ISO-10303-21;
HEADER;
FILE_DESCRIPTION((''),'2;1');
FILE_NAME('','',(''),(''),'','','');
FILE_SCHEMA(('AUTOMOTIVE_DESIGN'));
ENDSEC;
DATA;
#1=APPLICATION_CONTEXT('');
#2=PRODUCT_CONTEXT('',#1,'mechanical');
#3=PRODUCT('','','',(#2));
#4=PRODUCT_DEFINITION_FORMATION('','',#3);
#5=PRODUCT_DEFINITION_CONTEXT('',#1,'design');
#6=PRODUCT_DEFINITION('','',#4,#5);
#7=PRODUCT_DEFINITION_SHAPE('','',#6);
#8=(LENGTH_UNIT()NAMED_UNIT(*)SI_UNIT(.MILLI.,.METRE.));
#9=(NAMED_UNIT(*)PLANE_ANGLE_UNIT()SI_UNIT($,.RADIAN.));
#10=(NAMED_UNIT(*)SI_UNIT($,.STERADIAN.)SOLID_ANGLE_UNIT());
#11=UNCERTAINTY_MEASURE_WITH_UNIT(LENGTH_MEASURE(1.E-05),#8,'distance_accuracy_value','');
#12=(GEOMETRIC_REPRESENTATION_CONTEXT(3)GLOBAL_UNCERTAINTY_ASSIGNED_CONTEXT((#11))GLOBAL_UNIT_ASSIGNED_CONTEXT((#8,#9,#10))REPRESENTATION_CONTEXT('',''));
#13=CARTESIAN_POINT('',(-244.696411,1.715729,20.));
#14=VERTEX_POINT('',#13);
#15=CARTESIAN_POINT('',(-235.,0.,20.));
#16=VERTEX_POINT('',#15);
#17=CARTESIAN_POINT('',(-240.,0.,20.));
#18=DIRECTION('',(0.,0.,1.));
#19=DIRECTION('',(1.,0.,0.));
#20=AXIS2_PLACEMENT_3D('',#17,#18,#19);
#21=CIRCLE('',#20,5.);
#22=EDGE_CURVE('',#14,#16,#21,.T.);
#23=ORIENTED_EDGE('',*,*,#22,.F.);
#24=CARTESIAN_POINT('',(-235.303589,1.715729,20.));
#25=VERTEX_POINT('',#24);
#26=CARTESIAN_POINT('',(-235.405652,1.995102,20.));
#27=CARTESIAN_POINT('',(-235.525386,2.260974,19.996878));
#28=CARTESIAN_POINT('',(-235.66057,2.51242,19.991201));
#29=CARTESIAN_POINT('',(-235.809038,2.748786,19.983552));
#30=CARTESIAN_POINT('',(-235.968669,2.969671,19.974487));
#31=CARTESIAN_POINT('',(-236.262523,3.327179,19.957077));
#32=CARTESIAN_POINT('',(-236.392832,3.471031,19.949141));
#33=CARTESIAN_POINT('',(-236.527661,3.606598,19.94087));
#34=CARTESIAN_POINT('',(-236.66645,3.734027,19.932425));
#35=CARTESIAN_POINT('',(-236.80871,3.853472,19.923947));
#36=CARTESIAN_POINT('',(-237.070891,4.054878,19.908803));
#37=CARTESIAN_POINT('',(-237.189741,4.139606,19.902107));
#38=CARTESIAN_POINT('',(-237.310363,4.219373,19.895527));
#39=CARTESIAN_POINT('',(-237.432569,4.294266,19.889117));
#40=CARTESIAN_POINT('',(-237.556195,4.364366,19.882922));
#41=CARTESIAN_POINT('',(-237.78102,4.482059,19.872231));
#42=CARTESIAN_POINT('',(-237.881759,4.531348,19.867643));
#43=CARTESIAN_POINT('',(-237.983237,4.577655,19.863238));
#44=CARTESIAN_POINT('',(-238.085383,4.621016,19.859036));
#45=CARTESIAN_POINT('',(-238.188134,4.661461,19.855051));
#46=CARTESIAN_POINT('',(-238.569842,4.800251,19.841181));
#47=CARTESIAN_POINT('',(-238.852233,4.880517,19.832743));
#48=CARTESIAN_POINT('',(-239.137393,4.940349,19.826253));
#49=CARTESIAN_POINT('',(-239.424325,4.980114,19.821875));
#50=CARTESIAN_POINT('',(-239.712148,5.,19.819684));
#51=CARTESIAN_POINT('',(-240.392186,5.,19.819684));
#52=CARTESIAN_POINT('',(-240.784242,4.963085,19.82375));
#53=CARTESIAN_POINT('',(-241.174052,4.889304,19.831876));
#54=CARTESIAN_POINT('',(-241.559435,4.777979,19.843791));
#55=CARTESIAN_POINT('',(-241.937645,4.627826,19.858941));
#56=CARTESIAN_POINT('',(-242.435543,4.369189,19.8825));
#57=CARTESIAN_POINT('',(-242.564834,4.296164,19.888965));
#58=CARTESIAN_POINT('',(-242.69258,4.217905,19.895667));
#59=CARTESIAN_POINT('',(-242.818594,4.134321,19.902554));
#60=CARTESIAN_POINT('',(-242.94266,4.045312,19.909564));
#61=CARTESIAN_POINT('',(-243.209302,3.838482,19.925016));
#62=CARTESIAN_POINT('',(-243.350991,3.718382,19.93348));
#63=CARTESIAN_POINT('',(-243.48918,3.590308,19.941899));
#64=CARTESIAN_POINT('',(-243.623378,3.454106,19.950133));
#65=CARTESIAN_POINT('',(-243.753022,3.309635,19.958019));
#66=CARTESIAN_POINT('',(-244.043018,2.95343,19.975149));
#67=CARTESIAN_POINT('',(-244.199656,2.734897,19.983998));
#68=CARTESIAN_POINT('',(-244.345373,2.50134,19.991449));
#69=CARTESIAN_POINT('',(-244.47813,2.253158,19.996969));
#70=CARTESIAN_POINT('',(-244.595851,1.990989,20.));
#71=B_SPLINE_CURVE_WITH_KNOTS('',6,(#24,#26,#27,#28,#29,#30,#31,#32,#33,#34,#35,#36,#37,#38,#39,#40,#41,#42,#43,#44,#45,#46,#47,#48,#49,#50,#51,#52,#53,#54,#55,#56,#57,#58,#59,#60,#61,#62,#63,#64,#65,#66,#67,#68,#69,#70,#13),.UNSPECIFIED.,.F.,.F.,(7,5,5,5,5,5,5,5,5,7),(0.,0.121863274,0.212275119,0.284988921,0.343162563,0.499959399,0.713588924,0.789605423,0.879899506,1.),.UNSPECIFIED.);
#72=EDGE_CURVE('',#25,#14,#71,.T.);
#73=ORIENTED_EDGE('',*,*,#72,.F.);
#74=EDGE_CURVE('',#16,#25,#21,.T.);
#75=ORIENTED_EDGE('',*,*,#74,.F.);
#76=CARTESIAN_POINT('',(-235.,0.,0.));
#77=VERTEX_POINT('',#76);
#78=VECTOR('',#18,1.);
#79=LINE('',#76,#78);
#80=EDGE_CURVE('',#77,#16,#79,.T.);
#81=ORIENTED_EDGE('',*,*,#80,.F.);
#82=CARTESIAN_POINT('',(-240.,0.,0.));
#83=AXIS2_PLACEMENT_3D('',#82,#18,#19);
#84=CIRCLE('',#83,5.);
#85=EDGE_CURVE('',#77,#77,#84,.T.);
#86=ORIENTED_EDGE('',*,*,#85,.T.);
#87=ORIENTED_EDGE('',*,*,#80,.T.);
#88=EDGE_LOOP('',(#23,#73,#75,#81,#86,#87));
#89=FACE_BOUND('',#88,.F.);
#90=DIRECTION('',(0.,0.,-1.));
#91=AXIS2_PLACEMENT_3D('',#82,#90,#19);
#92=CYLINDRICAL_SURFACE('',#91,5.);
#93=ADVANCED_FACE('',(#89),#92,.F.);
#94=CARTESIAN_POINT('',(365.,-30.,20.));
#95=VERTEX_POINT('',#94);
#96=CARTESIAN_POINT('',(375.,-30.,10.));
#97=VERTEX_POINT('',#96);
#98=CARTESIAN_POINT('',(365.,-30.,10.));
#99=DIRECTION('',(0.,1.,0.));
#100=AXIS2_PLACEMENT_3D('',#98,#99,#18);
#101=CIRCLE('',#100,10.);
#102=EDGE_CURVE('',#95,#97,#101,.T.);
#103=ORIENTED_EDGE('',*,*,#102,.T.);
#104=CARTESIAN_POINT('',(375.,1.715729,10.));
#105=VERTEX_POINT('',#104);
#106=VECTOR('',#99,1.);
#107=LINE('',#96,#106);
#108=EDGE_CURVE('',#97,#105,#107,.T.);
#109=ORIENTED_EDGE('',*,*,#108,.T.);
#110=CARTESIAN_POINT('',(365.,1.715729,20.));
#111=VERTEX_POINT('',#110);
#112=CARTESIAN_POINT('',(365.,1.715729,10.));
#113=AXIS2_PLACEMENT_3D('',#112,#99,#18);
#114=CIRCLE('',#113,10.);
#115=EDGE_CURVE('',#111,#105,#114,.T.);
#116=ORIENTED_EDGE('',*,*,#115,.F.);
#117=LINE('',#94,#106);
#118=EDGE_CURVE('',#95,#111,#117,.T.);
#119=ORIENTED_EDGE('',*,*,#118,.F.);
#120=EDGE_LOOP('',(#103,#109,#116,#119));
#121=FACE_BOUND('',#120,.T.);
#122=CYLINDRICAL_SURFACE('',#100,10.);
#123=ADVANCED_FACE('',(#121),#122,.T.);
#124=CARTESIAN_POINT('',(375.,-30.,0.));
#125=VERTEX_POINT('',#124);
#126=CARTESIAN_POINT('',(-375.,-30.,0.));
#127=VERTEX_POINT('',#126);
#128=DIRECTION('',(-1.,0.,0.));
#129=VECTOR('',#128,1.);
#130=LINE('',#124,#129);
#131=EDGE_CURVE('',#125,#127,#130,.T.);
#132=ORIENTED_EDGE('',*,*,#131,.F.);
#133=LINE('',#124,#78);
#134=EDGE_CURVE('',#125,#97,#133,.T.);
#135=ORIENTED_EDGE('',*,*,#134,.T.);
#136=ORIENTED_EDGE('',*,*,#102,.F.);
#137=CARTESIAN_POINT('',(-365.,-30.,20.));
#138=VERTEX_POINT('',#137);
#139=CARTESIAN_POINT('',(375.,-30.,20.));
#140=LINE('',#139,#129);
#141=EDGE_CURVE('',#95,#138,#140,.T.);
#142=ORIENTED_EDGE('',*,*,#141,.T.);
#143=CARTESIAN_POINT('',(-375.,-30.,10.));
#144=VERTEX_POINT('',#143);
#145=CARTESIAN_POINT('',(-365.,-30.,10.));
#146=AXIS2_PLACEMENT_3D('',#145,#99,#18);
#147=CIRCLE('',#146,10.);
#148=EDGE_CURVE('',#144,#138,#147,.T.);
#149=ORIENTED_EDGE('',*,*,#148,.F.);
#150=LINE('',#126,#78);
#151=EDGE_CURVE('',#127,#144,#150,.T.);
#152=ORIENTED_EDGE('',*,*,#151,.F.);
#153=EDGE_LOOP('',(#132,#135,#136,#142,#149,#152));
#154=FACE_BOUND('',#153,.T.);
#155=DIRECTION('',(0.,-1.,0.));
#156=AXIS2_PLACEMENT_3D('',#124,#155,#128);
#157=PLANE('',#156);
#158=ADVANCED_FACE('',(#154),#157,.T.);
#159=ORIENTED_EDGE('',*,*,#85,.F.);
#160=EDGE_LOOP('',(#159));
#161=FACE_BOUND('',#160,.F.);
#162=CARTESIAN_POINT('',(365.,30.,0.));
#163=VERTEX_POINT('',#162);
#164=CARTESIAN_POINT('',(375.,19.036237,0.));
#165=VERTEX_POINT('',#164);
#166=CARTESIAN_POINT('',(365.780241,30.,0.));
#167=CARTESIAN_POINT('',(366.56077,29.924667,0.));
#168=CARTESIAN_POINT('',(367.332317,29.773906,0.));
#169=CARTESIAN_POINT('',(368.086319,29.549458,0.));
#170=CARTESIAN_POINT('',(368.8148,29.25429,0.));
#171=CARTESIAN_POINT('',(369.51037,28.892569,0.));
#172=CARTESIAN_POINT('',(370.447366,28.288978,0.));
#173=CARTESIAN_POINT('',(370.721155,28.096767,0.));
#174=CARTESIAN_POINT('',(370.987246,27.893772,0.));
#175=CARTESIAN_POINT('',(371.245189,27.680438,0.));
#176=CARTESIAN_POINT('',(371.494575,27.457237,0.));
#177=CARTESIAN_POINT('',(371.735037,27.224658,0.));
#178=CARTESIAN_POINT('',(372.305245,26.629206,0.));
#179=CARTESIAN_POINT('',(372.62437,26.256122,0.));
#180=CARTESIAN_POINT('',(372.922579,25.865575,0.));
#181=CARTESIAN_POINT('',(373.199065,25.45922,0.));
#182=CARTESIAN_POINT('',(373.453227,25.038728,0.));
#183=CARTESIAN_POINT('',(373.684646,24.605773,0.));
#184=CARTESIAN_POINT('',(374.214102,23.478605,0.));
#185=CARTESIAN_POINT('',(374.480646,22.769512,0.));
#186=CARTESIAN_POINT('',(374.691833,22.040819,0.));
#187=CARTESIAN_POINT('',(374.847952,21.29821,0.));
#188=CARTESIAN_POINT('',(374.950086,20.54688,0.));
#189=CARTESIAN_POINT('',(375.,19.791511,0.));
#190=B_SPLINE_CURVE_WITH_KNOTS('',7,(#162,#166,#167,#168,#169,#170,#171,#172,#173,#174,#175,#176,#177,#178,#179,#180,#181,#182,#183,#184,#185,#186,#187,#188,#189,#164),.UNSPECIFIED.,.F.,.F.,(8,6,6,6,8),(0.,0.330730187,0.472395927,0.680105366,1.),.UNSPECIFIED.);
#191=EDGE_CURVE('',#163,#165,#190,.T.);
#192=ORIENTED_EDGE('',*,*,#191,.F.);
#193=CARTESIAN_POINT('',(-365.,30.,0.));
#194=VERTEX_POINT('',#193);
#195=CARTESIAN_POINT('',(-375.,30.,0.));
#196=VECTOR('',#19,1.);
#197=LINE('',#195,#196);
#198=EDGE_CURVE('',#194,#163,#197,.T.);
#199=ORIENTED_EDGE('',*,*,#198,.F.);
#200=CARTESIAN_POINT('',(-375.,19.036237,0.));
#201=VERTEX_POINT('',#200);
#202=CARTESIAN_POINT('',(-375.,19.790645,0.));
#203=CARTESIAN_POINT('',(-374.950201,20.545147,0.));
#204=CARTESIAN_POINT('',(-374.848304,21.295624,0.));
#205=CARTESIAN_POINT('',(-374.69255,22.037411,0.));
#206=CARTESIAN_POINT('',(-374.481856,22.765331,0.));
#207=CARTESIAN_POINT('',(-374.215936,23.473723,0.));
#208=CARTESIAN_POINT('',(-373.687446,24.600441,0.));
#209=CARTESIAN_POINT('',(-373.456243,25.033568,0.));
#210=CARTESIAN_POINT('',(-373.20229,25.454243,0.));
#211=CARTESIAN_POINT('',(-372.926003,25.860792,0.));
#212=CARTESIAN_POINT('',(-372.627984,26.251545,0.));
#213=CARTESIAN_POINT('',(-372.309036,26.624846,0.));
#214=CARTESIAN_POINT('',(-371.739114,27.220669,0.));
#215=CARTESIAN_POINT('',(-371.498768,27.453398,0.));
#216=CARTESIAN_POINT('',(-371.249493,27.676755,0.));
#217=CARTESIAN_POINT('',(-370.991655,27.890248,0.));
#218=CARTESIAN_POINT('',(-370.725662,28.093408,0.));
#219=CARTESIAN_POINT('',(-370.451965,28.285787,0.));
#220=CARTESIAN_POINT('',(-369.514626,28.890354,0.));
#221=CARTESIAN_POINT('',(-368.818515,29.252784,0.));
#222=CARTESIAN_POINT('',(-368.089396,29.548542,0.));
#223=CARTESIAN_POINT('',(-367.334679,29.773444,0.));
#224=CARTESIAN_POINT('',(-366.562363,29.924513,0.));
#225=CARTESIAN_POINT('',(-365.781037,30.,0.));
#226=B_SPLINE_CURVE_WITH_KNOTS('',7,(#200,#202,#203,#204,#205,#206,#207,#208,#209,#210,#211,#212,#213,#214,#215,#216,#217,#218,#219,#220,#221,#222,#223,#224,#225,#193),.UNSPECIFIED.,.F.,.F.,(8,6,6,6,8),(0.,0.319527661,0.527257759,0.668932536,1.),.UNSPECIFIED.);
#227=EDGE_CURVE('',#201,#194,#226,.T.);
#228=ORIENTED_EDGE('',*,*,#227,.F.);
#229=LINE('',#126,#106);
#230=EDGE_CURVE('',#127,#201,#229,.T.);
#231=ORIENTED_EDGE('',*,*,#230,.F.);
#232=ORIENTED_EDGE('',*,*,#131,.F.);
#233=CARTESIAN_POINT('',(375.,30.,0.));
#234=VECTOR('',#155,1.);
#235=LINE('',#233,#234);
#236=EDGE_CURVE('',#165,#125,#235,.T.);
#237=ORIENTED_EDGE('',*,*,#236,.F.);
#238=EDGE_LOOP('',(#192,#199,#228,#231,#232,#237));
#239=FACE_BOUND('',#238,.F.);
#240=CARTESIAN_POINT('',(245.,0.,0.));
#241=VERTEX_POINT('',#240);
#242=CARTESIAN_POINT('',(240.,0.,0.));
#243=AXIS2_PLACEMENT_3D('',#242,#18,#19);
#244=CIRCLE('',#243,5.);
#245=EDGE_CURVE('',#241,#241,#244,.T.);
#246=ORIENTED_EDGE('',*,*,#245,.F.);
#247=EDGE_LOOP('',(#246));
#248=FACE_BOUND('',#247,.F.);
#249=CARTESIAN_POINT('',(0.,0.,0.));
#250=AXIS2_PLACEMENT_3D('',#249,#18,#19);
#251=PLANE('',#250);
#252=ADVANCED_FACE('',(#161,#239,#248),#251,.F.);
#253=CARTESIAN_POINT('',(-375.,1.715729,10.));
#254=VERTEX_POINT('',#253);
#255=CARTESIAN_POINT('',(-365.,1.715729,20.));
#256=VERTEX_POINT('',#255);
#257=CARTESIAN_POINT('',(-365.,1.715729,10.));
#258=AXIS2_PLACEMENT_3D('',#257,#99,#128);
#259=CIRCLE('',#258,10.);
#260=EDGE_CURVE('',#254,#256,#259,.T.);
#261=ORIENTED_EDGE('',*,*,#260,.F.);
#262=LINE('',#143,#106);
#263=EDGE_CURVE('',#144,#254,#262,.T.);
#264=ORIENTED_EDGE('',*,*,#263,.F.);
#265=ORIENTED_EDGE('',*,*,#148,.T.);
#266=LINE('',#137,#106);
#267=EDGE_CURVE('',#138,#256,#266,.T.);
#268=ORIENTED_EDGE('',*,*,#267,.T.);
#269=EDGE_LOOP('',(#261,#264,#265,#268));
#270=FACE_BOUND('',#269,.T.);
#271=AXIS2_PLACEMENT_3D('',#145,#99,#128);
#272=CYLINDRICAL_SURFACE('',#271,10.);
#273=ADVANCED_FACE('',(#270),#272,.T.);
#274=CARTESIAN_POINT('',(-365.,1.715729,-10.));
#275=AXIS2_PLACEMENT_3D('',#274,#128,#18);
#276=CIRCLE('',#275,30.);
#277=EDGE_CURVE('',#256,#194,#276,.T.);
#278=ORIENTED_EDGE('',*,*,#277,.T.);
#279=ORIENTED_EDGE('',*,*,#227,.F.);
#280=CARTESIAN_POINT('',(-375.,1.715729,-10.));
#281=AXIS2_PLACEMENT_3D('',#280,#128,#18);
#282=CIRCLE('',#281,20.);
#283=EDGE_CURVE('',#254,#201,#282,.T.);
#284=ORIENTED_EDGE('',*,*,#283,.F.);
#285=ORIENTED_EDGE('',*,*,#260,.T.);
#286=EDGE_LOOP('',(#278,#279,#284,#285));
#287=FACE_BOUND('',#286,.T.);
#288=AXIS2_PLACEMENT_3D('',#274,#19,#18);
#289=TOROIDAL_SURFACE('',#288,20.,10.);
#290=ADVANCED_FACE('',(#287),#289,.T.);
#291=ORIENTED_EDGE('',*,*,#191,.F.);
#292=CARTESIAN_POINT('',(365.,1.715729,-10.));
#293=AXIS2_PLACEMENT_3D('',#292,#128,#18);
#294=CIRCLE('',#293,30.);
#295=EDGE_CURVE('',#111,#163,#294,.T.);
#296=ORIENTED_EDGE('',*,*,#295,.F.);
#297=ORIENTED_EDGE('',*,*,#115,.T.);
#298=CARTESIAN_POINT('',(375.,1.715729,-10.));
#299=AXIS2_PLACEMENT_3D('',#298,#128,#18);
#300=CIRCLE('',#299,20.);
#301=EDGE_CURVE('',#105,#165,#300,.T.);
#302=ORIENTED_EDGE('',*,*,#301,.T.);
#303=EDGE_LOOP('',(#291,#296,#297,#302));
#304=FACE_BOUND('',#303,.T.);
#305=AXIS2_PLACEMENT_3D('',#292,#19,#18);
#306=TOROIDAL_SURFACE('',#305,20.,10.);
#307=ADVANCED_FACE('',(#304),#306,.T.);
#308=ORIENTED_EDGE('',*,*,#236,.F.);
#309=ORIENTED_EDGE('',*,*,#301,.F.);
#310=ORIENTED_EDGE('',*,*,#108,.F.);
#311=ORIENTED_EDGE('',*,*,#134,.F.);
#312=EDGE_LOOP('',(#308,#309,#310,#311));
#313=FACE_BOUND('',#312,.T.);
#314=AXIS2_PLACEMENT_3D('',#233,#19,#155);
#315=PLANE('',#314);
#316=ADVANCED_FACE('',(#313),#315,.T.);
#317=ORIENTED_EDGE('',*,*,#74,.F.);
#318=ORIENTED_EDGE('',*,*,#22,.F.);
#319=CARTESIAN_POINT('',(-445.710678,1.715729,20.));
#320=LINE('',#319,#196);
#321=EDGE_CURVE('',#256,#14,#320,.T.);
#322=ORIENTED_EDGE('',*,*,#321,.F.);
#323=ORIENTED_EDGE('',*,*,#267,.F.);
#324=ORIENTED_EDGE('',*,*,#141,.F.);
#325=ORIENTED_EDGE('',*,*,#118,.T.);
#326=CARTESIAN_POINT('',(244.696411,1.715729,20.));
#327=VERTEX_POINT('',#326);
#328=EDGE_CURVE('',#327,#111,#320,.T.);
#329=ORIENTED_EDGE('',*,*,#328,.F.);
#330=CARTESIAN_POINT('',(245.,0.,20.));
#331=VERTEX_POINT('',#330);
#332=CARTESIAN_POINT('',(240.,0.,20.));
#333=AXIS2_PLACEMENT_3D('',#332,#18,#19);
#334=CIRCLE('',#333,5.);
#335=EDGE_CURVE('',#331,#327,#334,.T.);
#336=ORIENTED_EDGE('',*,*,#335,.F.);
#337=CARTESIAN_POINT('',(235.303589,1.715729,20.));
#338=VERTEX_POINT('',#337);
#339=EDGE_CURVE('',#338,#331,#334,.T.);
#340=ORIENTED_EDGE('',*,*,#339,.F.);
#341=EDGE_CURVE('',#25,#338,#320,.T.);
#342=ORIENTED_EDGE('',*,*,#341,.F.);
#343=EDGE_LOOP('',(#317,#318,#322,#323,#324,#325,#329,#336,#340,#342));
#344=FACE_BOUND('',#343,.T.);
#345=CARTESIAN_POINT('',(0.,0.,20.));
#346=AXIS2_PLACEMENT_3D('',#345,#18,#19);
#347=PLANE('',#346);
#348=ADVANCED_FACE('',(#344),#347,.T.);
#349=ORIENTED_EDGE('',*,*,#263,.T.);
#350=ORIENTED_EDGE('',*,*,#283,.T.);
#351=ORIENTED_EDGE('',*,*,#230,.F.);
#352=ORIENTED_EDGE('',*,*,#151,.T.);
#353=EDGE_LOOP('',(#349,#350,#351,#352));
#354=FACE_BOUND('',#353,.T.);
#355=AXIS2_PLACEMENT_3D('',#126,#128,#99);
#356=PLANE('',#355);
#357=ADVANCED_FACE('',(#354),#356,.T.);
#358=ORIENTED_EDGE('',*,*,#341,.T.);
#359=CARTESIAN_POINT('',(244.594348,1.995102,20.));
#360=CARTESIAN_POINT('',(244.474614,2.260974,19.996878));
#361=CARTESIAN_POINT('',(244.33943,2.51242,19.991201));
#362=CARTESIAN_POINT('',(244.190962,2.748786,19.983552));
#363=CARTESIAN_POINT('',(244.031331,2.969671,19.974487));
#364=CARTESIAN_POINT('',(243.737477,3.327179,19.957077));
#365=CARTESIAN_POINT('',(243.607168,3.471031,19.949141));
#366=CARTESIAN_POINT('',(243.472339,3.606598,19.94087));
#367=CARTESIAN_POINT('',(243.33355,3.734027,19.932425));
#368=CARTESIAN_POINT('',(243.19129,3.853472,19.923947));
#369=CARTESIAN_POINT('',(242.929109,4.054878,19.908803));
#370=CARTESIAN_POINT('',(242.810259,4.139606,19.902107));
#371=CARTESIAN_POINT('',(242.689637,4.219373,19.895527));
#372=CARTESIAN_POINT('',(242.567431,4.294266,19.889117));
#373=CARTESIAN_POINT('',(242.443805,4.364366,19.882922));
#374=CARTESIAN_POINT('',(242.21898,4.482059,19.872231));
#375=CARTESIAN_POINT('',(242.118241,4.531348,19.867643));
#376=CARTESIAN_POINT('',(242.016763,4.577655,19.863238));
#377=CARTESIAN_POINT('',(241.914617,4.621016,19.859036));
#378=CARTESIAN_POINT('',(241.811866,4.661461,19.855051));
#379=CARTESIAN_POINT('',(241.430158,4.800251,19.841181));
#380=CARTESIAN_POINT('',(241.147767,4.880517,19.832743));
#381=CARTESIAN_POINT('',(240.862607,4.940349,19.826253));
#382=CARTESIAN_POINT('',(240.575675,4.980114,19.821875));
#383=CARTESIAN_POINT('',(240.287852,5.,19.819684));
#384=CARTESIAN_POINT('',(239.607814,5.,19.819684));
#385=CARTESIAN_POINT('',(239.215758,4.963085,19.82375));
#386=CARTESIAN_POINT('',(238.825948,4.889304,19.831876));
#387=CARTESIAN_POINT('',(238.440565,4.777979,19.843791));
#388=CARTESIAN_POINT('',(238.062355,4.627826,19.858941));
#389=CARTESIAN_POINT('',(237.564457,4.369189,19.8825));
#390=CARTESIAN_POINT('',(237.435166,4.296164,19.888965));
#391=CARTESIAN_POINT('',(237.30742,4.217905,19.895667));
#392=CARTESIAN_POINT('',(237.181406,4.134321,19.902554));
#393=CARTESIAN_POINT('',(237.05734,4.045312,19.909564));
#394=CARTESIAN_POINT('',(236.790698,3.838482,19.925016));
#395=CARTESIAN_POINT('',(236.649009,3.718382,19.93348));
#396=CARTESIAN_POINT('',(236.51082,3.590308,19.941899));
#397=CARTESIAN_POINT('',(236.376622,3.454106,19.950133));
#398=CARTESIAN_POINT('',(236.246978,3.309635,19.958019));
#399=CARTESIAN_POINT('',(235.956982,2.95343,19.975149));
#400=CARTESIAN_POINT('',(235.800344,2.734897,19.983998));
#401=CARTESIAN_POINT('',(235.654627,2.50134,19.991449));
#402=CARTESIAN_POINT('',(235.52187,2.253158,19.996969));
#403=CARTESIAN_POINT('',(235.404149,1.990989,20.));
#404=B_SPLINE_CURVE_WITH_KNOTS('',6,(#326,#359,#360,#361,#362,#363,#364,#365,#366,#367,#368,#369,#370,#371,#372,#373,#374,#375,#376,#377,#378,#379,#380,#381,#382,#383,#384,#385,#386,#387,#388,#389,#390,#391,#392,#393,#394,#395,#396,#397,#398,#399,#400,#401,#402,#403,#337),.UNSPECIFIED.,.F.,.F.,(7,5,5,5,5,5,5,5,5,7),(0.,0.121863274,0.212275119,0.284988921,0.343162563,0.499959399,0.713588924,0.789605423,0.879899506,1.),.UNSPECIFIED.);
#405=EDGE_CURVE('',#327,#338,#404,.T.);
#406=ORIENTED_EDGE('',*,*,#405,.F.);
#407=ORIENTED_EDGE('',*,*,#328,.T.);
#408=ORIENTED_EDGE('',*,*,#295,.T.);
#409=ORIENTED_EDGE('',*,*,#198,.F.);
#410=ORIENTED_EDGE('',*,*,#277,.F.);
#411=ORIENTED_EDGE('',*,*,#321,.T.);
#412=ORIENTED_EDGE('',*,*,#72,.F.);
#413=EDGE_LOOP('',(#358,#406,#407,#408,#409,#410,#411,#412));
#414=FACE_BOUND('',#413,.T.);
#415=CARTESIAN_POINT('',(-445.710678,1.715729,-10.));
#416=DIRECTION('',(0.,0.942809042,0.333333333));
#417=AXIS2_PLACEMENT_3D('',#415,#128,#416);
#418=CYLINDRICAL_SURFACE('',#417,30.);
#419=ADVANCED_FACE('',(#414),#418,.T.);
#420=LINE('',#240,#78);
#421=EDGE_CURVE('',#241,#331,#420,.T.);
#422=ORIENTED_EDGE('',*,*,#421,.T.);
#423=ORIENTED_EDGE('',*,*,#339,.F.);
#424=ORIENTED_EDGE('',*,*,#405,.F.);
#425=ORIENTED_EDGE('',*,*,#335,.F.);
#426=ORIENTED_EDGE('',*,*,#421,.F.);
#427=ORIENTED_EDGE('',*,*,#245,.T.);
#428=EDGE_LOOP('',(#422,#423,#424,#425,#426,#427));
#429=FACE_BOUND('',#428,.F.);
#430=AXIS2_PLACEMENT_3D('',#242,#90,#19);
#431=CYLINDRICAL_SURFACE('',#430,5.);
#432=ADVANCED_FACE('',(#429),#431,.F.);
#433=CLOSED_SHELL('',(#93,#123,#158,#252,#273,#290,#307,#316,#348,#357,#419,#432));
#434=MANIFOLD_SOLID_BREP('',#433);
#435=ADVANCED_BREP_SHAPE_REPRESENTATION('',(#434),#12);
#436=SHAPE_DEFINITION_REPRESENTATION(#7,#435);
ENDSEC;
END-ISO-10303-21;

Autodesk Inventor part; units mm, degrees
ref_plane "YZ Plane" through (0, 0, 0) normal (1, 0, 0) x (0, 1, 0)
ref_plane "XZ Plane" through (0, 0, 0) normal (0, 1, 0) x (-1, 0, 0)
ref_plane "XY Plane" through (0, 0, 0) normal (0, 0, 1) x (1, 0, 0)
sketch "Sketch1" plane through (0, 0, 0) normal (0, 0, 1) x (1, 0, 0)
  line L0 (-375, 30) -> (375, 30)
  line L1 (375, 30) -> (375, -30)
  line L2 (375, -30) -> (-375, -30)
  line L3 (-375, -30) -> (-375, 30)
  circle A0 centre (-240, 0) radius 5
  circle A1 centre (240, 0) radius 5
  point P0 (0, 0)
  dimension "d0" = 750
  dimension "d1" = 60
  dimension "d3" = 10
extrude "Extrusion1" add sketch "Sketch1" along normal blind 20
fillet "Fillet1" radius 30 1 edges at (0, 30, 20)
fillet "Fillet2" radius 10 4 edges at (-375, -14.1421, 20) (-375, 19.0362, 14.4949) (375, 19.0362, 14.4949) (375, -14.1421, 20)
properties part number "Topo_Aerofoil"
